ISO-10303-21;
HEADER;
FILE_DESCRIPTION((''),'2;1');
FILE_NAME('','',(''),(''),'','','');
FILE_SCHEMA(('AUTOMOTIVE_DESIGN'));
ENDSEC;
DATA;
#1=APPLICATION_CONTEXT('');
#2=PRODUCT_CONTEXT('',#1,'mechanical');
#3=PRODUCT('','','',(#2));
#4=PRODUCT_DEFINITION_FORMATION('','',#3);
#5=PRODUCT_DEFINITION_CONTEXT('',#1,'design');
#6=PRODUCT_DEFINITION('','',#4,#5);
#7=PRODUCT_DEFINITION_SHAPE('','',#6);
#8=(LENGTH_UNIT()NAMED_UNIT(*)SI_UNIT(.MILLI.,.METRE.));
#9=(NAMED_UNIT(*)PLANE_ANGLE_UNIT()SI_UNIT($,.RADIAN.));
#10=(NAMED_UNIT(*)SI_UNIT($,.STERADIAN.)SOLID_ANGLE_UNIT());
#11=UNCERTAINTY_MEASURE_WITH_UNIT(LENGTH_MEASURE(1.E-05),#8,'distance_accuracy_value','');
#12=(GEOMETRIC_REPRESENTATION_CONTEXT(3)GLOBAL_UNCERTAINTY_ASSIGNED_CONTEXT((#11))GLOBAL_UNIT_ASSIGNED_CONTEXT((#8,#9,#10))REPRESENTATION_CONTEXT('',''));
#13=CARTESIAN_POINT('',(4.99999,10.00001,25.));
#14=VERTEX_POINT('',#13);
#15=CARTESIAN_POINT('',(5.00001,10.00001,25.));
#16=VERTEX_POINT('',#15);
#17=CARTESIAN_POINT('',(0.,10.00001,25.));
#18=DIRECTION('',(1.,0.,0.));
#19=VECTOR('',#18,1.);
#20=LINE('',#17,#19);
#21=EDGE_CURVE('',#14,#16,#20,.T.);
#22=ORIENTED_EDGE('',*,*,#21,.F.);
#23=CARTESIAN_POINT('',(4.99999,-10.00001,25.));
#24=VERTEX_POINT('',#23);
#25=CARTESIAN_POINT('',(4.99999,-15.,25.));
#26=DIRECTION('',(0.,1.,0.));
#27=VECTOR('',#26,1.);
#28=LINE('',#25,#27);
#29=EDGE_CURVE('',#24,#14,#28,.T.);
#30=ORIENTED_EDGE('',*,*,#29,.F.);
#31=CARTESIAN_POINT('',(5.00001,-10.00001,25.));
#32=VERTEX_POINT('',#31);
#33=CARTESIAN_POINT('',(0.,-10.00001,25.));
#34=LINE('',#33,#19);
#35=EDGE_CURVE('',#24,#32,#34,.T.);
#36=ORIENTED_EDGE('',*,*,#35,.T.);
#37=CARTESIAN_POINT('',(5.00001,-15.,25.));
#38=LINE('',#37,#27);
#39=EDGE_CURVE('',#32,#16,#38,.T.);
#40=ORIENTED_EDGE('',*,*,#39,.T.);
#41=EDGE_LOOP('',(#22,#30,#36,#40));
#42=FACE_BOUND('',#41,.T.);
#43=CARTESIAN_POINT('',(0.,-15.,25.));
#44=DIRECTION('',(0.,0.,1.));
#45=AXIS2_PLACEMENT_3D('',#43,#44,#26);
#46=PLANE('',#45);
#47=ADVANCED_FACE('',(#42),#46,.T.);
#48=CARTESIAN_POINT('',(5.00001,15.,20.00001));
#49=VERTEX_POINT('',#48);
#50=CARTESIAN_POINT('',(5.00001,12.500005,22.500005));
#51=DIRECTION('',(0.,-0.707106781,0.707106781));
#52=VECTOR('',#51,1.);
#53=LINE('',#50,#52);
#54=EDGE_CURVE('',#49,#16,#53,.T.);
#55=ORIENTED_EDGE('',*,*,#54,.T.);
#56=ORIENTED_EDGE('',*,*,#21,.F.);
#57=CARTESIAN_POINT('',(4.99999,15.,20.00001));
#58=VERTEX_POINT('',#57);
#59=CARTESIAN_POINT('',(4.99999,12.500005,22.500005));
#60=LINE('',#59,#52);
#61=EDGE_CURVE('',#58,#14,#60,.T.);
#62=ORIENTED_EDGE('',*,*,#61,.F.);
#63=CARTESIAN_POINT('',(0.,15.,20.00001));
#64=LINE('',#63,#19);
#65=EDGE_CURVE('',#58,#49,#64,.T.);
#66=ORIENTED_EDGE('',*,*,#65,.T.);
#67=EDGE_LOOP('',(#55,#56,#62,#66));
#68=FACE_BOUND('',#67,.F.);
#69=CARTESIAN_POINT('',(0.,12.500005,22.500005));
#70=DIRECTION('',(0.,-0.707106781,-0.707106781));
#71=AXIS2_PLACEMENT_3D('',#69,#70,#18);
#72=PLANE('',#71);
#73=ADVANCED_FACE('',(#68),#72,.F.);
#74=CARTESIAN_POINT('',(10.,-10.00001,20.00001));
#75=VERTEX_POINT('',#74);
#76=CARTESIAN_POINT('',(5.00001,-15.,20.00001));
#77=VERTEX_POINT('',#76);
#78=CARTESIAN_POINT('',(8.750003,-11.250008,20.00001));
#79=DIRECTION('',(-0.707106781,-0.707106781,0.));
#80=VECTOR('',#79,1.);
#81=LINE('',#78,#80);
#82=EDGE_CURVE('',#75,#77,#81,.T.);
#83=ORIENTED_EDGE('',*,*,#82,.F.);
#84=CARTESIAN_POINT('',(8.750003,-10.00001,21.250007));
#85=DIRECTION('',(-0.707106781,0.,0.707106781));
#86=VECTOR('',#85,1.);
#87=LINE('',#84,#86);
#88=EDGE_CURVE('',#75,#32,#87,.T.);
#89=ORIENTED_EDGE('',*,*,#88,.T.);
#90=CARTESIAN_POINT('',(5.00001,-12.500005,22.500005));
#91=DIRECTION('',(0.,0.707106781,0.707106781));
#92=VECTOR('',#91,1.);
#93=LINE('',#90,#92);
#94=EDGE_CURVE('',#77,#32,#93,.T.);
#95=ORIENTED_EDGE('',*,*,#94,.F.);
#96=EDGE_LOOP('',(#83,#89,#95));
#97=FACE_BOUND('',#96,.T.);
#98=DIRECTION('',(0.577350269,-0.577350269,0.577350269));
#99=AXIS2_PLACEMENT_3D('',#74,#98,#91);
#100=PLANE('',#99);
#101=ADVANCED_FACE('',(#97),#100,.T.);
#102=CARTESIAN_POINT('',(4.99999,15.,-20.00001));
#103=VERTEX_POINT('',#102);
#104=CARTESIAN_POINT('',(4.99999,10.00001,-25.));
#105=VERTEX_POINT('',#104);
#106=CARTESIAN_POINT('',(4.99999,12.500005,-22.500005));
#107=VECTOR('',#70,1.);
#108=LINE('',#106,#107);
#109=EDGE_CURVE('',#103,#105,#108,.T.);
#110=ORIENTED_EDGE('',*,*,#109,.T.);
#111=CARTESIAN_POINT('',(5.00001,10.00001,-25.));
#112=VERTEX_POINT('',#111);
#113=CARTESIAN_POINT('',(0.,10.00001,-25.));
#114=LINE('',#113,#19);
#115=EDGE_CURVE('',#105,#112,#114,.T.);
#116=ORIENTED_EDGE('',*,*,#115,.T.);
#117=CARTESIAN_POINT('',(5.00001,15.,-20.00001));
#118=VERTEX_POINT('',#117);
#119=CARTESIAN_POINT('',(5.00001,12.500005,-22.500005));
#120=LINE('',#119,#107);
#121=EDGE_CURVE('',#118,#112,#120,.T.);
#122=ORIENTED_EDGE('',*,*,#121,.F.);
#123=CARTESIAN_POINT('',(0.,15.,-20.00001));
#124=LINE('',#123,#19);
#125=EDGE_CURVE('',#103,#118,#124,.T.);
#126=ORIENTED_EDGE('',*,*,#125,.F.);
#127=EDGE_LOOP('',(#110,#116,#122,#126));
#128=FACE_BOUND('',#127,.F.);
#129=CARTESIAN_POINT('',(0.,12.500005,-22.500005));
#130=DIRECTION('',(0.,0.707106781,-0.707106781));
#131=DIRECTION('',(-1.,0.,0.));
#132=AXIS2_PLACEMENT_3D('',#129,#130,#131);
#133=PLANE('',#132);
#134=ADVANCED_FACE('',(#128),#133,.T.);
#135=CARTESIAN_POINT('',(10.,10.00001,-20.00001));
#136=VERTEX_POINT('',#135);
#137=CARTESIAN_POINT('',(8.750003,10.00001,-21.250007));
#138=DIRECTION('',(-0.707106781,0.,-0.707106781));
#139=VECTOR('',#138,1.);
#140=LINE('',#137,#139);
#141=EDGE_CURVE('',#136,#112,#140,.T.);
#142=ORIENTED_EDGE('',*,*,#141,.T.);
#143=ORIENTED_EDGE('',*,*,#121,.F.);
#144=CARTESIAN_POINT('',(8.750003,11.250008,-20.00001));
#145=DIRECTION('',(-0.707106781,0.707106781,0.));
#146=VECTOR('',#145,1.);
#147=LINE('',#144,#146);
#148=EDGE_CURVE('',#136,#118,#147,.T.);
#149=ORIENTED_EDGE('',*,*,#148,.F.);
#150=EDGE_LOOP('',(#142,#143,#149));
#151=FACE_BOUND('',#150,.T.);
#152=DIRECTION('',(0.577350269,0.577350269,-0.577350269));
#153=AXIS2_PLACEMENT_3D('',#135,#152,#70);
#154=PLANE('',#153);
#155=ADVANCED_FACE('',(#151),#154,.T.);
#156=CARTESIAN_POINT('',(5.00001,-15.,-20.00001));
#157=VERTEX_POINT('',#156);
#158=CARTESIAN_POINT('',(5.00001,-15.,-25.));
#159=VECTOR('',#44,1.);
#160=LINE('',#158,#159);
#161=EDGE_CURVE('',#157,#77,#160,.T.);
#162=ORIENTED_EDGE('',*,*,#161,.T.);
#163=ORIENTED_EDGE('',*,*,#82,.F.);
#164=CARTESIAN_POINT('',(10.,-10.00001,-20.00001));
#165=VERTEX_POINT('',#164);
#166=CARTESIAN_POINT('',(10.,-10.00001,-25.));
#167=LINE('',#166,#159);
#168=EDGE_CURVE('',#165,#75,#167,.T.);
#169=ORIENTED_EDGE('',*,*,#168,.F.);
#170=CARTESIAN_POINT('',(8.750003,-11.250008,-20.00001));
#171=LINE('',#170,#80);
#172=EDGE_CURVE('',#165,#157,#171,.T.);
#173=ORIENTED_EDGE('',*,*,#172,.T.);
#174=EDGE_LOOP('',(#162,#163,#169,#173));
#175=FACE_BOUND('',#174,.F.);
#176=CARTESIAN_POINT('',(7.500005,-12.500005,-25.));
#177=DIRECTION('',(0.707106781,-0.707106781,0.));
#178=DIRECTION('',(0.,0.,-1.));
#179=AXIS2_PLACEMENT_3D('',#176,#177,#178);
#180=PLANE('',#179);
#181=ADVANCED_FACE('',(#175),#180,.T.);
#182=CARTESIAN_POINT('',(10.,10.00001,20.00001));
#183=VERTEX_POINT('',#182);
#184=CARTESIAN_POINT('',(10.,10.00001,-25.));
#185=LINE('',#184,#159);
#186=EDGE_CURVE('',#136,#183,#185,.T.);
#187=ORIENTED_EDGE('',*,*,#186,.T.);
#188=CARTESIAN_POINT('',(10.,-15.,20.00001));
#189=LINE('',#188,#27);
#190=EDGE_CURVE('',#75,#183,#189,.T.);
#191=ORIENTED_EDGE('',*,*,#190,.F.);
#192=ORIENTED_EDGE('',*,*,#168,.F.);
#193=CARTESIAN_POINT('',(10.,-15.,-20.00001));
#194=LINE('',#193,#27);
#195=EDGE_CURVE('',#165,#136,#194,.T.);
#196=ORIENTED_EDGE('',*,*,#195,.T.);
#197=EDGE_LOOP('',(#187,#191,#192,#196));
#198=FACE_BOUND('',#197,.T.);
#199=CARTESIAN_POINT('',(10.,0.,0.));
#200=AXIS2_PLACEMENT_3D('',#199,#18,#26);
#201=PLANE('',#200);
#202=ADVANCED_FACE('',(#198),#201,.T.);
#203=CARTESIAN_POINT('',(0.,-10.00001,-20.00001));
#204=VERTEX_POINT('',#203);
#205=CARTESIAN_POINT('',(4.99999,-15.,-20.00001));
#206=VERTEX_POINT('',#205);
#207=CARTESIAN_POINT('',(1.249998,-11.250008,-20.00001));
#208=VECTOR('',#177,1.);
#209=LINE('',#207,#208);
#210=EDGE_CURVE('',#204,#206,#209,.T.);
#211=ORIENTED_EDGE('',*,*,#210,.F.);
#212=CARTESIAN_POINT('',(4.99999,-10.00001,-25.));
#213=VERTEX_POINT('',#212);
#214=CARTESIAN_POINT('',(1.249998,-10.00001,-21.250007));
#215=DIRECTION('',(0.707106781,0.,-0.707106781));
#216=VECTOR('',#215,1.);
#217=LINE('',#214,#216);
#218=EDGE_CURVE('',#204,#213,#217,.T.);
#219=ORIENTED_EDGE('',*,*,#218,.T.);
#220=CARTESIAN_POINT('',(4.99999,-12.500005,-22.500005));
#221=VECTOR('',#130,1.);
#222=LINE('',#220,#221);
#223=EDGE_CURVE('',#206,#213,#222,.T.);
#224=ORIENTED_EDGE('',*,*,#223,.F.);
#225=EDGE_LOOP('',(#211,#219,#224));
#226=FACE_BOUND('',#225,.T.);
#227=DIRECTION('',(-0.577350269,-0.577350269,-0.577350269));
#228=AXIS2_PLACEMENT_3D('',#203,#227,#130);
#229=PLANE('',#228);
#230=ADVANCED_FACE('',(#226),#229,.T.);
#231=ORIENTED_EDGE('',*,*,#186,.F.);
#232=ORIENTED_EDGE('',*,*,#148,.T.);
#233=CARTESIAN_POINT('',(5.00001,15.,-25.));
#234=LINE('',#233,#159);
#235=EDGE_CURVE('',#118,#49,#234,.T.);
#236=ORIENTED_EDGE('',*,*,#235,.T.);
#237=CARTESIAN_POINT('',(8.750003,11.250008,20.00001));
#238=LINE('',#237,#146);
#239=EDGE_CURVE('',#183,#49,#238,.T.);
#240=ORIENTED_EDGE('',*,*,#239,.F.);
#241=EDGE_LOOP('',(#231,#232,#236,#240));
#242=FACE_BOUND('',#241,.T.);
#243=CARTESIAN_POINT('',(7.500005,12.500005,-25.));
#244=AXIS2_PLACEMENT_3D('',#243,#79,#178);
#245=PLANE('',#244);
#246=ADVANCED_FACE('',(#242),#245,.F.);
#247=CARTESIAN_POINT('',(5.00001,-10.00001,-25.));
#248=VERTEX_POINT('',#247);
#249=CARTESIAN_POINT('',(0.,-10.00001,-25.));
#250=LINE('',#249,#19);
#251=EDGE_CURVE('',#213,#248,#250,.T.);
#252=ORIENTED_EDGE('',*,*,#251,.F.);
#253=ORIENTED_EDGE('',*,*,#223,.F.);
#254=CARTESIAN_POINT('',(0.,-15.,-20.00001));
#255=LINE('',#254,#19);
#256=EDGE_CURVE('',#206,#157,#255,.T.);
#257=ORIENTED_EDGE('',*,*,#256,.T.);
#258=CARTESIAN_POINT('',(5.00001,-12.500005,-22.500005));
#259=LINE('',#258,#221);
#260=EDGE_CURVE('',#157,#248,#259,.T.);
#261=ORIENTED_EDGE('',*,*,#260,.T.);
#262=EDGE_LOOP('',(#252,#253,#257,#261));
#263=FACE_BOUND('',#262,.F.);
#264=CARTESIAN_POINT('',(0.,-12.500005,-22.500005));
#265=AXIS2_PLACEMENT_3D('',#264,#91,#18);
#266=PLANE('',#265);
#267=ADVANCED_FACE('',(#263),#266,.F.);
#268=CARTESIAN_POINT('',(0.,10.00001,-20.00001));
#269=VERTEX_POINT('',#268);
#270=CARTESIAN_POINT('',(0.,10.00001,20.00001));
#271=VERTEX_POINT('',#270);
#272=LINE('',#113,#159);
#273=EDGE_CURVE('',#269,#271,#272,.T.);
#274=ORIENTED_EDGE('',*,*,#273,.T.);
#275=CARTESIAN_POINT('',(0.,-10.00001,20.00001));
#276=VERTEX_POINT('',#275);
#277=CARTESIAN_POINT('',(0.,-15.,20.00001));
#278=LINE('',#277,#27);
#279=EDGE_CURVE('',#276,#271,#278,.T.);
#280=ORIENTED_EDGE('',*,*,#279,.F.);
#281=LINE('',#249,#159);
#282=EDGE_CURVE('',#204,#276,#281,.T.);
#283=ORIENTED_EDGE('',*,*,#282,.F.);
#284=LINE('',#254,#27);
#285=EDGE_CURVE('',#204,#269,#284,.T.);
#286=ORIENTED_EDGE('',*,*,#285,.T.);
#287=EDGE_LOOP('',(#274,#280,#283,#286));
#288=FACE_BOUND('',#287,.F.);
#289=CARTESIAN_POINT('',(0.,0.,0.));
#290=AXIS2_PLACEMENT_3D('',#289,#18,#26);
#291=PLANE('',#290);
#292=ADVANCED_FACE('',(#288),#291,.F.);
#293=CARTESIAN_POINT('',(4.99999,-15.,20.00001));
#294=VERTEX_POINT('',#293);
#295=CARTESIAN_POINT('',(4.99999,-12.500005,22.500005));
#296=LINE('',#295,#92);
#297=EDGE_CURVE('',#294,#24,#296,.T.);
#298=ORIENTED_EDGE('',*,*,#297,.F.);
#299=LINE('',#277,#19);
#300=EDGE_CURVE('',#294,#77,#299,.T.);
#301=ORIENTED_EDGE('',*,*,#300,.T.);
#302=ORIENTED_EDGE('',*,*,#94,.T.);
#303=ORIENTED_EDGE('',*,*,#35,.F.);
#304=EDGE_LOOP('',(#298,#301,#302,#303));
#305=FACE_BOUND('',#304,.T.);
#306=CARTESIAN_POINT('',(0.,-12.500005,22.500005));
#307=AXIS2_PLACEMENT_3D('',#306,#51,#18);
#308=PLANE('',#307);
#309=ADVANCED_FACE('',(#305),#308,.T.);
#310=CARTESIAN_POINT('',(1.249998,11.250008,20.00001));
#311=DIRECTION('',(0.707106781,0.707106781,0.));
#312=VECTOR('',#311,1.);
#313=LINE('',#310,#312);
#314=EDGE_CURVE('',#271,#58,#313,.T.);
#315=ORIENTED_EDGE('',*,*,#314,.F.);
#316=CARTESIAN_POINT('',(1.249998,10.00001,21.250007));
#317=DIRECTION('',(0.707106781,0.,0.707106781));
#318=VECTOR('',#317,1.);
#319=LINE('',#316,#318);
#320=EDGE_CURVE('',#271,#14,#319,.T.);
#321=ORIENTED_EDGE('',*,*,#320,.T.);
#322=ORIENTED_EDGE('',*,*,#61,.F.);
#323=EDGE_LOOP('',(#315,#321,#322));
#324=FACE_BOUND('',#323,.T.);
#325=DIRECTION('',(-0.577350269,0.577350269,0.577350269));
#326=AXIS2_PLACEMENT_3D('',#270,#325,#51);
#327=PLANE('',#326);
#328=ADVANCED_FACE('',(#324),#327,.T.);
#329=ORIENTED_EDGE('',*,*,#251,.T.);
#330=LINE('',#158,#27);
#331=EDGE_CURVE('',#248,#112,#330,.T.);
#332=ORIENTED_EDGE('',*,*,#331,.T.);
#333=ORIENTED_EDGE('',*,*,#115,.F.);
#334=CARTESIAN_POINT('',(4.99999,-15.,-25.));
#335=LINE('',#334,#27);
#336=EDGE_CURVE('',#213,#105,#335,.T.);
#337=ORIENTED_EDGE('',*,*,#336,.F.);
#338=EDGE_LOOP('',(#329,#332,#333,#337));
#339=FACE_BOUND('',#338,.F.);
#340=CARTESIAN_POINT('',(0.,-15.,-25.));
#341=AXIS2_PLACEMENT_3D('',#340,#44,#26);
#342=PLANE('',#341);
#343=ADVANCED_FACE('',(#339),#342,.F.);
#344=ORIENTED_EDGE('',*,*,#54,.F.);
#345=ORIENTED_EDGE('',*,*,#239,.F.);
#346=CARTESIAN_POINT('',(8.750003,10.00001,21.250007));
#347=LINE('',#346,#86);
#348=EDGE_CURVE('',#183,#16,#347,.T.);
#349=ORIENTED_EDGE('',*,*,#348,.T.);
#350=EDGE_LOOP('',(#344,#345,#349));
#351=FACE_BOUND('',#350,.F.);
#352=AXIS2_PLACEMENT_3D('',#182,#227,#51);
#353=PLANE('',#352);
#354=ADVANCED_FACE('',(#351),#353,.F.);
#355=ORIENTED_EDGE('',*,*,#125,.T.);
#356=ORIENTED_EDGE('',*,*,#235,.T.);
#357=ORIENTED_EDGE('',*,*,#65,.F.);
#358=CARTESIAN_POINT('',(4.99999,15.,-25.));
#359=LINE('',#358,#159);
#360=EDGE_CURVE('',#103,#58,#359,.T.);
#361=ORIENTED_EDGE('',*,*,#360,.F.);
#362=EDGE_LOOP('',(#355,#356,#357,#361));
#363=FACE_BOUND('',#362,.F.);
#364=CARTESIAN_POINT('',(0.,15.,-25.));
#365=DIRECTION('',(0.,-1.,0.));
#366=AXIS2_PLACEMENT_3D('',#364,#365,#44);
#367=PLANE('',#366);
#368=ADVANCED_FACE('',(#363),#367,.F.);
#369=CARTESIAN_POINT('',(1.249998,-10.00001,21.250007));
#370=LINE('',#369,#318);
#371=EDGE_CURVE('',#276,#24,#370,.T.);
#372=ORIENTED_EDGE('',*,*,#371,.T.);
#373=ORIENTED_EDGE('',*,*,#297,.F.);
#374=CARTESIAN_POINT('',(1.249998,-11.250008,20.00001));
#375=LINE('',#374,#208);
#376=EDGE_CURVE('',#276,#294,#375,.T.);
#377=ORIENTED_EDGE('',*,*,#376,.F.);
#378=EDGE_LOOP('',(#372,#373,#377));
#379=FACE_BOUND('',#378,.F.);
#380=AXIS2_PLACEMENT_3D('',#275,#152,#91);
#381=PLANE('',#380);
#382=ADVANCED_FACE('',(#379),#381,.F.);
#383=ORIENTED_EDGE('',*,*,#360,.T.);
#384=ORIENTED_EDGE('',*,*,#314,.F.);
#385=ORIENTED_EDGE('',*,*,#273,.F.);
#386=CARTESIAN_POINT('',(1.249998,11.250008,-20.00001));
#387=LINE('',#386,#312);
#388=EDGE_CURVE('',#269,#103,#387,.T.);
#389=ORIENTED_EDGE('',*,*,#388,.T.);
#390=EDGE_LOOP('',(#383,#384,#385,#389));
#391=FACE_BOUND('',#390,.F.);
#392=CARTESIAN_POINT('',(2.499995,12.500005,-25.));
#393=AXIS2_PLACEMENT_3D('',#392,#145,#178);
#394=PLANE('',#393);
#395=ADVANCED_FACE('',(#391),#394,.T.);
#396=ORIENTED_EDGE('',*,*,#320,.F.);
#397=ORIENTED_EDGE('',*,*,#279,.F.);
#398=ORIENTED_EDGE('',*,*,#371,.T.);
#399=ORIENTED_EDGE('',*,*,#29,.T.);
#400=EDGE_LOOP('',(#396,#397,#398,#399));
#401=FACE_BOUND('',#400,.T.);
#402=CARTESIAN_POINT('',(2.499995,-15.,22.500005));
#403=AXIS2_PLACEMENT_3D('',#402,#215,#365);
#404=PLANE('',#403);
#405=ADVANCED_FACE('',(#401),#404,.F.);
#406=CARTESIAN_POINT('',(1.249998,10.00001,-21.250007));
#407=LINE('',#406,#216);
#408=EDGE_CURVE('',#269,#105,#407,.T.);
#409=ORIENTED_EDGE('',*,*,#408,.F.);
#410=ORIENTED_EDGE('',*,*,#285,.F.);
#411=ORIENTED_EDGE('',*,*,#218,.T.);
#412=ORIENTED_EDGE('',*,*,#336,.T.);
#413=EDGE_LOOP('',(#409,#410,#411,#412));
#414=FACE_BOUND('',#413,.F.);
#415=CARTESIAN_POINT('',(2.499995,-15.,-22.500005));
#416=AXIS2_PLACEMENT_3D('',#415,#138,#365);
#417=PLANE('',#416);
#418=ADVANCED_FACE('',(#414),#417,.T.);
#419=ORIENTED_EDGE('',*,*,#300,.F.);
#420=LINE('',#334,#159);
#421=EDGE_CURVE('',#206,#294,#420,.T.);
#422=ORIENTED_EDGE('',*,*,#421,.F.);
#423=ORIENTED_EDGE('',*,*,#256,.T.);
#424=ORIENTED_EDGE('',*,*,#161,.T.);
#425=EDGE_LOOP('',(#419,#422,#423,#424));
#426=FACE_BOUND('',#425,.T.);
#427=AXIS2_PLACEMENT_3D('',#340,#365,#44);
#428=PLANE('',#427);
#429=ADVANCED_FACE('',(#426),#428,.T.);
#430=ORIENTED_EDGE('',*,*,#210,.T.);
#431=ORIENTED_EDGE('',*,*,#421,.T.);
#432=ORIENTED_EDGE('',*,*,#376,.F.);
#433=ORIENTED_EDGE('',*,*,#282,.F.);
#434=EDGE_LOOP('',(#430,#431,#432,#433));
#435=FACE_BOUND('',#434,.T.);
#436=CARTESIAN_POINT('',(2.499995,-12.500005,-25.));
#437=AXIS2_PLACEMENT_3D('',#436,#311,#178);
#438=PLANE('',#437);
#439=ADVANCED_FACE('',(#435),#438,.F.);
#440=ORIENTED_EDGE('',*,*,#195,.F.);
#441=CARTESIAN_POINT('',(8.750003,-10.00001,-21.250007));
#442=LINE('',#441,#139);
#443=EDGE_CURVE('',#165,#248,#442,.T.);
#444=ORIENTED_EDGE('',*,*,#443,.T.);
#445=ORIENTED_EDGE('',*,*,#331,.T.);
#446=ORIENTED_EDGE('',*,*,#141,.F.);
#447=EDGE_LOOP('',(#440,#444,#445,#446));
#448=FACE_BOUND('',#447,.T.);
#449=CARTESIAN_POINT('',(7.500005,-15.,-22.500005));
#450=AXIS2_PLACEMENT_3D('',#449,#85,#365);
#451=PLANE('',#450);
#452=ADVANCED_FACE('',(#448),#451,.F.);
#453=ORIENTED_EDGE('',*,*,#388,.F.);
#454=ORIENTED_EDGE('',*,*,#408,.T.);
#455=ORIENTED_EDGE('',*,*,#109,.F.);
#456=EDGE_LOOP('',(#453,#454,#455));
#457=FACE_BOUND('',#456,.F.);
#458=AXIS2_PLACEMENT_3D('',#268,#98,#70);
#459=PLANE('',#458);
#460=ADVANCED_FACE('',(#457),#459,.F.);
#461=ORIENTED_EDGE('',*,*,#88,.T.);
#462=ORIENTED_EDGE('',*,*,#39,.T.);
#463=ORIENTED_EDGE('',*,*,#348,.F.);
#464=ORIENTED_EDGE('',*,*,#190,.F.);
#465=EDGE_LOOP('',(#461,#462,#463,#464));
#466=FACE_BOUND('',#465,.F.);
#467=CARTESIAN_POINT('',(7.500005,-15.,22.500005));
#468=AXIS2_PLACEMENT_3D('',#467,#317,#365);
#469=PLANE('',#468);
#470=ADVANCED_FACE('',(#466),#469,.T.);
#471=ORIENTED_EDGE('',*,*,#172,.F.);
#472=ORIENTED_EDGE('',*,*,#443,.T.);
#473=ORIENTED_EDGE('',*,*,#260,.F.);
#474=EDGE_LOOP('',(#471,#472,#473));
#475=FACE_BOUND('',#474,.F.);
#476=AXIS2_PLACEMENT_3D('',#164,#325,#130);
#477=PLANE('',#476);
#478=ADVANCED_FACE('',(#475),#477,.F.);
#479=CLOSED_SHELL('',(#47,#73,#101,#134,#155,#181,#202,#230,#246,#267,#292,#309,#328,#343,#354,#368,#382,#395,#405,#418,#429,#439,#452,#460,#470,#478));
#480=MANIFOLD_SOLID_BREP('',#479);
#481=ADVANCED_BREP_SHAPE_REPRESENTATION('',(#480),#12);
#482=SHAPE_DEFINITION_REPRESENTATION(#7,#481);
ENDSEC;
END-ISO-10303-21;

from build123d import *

# Parameters (mm, degrees)
F0_W     = 30
F0_H     = 50
F1_DEPTH = 10
F2_SIZE  = 4.99999


# Not quite as in the source:
# - a fillet or chamfer is up to 0.001 mm smaller than in the source, because OpenCascade refuses the exact size


with BuildPart() as f1:
    # F0 (on Right) → F1 (new body)
    with BuildSketch(Plane.YZ):
        Rectangle(F0_W, F0_H)
    extrude(amount=F1_DEPTH)

    # F2 (size 5 in the source; OpenCascade refuses exactly that, so slightly less here)
    f2_edges = [f1.edges().sort_by_distance(p)[0] for p in [
        (5, -15, 25),
        (5, -15, -25),
        (0, -15, 0),
        (10, -15, 0),
        (5, 15, -25),
        (5, 15, 25),
        (0, 15, 0),
        (10, 15, 0),
        (10, 0, 25),
        (10, 0, -25),
        (0, 0, 25),
        (0, 0, -25),
    ]]
    chamfer(f2_edges, length=F2_SIZE)


solid = f1.part
